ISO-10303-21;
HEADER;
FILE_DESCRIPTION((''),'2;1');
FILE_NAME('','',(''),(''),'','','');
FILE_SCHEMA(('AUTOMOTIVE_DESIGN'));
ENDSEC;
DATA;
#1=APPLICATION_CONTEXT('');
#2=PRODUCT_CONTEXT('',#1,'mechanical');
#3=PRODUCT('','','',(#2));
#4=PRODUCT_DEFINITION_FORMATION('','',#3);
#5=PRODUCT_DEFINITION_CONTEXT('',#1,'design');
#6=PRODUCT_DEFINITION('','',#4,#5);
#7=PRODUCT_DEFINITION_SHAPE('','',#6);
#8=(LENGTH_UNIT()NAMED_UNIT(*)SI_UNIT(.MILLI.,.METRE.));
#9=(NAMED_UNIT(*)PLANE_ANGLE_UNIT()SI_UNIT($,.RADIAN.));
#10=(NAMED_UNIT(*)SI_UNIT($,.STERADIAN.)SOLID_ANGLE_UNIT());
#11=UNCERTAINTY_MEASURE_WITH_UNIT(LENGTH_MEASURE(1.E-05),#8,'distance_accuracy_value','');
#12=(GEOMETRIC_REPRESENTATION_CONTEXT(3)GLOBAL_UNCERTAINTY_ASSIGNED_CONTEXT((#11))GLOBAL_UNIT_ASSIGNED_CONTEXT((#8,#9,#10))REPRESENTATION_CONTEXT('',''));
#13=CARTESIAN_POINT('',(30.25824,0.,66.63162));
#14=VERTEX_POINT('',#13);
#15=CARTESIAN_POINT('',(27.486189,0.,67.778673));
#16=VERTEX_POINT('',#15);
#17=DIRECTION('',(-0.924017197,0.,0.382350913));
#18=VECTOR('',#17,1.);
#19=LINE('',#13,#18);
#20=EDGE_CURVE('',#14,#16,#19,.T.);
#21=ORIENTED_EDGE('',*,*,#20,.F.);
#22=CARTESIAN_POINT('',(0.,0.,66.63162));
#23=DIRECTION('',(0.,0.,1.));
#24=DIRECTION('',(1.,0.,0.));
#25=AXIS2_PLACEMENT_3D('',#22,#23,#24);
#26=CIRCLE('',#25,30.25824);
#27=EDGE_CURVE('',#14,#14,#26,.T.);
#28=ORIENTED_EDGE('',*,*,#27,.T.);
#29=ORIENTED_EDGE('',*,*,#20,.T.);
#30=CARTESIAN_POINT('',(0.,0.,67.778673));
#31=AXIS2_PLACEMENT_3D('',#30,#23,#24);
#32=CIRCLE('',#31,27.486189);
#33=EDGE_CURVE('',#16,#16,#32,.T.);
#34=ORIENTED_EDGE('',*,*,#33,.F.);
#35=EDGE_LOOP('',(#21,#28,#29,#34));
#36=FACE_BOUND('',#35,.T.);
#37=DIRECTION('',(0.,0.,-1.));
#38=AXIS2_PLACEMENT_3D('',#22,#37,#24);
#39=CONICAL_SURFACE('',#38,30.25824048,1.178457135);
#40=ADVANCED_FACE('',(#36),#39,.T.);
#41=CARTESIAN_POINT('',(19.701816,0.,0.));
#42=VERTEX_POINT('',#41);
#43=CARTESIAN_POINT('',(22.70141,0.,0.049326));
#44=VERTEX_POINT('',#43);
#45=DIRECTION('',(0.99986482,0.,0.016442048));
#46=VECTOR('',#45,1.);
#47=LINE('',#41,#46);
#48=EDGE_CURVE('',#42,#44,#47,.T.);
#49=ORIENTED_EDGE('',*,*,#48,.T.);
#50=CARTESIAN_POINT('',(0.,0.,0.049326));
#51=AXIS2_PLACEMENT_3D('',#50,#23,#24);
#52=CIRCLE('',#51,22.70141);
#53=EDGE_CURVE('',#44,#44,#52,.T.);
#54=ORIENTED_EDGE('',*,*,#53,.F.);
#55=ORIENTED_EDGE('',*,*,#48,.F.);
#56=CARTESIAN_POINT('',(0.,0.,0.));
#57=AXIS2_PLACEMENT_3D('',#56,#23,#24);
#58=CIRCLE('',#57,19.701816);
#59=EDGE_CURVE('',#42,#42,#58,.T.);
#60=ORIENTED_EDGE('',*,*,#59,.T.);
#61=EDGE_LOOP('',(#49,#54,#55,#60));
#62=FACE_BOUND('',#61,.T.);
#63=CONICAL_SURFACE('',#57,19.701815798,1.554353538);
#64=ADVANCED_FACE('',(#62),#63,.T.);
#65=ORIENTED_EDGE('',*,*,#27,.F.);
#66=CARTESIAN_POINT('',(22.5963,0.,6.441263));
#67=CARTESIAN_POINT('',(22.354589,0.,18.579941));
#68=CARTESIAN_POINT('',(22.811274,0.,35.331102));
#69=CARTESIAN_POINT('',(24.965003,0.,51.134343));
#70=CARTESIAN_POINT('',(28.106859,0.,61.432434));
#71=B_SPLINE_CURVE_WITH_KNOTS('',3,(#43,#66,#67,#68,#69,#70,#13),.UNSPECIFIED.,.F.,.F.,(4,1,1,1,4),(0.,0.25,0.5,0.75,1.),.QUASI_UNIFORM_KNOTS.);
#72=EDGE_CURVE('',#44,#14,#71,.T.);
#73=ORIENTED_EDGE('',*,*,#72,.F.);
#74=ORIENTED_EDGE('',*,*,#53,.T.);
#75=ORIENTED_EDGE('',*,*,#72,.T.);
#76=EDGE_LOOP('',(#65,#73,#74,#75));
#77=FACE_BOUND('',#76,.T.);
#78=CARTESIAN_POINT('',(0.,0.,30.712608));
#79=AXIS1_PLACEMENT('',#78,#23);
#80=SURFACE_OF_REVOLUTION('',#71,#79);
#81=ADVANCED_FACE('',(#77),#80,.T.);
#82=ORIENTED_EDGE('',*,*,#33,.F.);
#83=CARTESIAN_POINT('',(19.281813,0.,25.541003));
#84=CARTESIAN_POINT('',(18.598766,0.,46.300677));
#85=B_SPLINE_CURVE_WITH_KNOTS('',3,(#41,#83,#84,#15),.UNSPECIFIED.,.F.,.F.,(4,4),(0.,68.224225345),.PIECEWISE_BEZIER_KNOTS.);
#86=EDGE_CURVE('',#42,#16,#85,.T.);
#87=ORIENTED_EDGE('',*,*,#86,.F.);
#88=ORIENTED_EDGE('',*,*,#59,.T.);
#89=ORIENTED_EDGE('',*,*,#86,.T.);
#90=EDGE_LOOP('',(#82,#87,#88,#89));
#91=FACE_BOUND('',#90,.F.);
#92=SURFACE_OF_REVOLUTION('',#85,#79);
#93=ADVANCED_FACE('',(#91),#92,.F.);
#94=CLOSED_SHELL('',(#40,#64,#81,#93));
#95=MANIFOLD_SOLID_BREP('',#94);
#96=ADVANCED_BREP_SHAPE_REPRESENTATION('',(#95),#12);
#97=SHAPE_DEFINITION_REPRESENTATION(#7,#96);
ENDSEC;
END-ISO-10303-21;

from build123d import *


with BuildPart() as f1:
    # F0 (on Front) → F1 (revolve)
    with BuildSketch(Plane.XZ):
        with BuildLine():
            add(Edge.make_bspline(
                [(19.7018157983, 0), (19.2818126331, 25.5410025517), (18.5987663766, 46.3006769617), (27.4861888909, 67.7786726008)],
                knots=[0, 0, 0, 0, 68.2242253453, 68.2242253453, 68.2242253453, 68.2242253453], degree=3))
            Line((19.7018157983, 0), (22.7014102595, 0.0493261439))
            add(Edge.make_bspline(
                [(22.7014102595, 0.0493261439), (22.5962995232, 6.4412626981), (22.3545888627, 18.5799406922), (22.8112736431, 35.3311021878), (24.9650033553, 51.1343432532), (28.1068589741, 61.4324338738), (30.2582404805, 66.6316198626)],
                knots=[0, 0, 0, 0, 0.25, 0.5, 0.75, 1, 1, 1, 1], degree=3))
            Line((30.2582404805, 66.6316198626), (27.4861888909, 67.7786726008))
        make_face()
    revolve(axis=Axis((0, 0, 30.712608248), (0, 0, 1)))


solid = f1.part
